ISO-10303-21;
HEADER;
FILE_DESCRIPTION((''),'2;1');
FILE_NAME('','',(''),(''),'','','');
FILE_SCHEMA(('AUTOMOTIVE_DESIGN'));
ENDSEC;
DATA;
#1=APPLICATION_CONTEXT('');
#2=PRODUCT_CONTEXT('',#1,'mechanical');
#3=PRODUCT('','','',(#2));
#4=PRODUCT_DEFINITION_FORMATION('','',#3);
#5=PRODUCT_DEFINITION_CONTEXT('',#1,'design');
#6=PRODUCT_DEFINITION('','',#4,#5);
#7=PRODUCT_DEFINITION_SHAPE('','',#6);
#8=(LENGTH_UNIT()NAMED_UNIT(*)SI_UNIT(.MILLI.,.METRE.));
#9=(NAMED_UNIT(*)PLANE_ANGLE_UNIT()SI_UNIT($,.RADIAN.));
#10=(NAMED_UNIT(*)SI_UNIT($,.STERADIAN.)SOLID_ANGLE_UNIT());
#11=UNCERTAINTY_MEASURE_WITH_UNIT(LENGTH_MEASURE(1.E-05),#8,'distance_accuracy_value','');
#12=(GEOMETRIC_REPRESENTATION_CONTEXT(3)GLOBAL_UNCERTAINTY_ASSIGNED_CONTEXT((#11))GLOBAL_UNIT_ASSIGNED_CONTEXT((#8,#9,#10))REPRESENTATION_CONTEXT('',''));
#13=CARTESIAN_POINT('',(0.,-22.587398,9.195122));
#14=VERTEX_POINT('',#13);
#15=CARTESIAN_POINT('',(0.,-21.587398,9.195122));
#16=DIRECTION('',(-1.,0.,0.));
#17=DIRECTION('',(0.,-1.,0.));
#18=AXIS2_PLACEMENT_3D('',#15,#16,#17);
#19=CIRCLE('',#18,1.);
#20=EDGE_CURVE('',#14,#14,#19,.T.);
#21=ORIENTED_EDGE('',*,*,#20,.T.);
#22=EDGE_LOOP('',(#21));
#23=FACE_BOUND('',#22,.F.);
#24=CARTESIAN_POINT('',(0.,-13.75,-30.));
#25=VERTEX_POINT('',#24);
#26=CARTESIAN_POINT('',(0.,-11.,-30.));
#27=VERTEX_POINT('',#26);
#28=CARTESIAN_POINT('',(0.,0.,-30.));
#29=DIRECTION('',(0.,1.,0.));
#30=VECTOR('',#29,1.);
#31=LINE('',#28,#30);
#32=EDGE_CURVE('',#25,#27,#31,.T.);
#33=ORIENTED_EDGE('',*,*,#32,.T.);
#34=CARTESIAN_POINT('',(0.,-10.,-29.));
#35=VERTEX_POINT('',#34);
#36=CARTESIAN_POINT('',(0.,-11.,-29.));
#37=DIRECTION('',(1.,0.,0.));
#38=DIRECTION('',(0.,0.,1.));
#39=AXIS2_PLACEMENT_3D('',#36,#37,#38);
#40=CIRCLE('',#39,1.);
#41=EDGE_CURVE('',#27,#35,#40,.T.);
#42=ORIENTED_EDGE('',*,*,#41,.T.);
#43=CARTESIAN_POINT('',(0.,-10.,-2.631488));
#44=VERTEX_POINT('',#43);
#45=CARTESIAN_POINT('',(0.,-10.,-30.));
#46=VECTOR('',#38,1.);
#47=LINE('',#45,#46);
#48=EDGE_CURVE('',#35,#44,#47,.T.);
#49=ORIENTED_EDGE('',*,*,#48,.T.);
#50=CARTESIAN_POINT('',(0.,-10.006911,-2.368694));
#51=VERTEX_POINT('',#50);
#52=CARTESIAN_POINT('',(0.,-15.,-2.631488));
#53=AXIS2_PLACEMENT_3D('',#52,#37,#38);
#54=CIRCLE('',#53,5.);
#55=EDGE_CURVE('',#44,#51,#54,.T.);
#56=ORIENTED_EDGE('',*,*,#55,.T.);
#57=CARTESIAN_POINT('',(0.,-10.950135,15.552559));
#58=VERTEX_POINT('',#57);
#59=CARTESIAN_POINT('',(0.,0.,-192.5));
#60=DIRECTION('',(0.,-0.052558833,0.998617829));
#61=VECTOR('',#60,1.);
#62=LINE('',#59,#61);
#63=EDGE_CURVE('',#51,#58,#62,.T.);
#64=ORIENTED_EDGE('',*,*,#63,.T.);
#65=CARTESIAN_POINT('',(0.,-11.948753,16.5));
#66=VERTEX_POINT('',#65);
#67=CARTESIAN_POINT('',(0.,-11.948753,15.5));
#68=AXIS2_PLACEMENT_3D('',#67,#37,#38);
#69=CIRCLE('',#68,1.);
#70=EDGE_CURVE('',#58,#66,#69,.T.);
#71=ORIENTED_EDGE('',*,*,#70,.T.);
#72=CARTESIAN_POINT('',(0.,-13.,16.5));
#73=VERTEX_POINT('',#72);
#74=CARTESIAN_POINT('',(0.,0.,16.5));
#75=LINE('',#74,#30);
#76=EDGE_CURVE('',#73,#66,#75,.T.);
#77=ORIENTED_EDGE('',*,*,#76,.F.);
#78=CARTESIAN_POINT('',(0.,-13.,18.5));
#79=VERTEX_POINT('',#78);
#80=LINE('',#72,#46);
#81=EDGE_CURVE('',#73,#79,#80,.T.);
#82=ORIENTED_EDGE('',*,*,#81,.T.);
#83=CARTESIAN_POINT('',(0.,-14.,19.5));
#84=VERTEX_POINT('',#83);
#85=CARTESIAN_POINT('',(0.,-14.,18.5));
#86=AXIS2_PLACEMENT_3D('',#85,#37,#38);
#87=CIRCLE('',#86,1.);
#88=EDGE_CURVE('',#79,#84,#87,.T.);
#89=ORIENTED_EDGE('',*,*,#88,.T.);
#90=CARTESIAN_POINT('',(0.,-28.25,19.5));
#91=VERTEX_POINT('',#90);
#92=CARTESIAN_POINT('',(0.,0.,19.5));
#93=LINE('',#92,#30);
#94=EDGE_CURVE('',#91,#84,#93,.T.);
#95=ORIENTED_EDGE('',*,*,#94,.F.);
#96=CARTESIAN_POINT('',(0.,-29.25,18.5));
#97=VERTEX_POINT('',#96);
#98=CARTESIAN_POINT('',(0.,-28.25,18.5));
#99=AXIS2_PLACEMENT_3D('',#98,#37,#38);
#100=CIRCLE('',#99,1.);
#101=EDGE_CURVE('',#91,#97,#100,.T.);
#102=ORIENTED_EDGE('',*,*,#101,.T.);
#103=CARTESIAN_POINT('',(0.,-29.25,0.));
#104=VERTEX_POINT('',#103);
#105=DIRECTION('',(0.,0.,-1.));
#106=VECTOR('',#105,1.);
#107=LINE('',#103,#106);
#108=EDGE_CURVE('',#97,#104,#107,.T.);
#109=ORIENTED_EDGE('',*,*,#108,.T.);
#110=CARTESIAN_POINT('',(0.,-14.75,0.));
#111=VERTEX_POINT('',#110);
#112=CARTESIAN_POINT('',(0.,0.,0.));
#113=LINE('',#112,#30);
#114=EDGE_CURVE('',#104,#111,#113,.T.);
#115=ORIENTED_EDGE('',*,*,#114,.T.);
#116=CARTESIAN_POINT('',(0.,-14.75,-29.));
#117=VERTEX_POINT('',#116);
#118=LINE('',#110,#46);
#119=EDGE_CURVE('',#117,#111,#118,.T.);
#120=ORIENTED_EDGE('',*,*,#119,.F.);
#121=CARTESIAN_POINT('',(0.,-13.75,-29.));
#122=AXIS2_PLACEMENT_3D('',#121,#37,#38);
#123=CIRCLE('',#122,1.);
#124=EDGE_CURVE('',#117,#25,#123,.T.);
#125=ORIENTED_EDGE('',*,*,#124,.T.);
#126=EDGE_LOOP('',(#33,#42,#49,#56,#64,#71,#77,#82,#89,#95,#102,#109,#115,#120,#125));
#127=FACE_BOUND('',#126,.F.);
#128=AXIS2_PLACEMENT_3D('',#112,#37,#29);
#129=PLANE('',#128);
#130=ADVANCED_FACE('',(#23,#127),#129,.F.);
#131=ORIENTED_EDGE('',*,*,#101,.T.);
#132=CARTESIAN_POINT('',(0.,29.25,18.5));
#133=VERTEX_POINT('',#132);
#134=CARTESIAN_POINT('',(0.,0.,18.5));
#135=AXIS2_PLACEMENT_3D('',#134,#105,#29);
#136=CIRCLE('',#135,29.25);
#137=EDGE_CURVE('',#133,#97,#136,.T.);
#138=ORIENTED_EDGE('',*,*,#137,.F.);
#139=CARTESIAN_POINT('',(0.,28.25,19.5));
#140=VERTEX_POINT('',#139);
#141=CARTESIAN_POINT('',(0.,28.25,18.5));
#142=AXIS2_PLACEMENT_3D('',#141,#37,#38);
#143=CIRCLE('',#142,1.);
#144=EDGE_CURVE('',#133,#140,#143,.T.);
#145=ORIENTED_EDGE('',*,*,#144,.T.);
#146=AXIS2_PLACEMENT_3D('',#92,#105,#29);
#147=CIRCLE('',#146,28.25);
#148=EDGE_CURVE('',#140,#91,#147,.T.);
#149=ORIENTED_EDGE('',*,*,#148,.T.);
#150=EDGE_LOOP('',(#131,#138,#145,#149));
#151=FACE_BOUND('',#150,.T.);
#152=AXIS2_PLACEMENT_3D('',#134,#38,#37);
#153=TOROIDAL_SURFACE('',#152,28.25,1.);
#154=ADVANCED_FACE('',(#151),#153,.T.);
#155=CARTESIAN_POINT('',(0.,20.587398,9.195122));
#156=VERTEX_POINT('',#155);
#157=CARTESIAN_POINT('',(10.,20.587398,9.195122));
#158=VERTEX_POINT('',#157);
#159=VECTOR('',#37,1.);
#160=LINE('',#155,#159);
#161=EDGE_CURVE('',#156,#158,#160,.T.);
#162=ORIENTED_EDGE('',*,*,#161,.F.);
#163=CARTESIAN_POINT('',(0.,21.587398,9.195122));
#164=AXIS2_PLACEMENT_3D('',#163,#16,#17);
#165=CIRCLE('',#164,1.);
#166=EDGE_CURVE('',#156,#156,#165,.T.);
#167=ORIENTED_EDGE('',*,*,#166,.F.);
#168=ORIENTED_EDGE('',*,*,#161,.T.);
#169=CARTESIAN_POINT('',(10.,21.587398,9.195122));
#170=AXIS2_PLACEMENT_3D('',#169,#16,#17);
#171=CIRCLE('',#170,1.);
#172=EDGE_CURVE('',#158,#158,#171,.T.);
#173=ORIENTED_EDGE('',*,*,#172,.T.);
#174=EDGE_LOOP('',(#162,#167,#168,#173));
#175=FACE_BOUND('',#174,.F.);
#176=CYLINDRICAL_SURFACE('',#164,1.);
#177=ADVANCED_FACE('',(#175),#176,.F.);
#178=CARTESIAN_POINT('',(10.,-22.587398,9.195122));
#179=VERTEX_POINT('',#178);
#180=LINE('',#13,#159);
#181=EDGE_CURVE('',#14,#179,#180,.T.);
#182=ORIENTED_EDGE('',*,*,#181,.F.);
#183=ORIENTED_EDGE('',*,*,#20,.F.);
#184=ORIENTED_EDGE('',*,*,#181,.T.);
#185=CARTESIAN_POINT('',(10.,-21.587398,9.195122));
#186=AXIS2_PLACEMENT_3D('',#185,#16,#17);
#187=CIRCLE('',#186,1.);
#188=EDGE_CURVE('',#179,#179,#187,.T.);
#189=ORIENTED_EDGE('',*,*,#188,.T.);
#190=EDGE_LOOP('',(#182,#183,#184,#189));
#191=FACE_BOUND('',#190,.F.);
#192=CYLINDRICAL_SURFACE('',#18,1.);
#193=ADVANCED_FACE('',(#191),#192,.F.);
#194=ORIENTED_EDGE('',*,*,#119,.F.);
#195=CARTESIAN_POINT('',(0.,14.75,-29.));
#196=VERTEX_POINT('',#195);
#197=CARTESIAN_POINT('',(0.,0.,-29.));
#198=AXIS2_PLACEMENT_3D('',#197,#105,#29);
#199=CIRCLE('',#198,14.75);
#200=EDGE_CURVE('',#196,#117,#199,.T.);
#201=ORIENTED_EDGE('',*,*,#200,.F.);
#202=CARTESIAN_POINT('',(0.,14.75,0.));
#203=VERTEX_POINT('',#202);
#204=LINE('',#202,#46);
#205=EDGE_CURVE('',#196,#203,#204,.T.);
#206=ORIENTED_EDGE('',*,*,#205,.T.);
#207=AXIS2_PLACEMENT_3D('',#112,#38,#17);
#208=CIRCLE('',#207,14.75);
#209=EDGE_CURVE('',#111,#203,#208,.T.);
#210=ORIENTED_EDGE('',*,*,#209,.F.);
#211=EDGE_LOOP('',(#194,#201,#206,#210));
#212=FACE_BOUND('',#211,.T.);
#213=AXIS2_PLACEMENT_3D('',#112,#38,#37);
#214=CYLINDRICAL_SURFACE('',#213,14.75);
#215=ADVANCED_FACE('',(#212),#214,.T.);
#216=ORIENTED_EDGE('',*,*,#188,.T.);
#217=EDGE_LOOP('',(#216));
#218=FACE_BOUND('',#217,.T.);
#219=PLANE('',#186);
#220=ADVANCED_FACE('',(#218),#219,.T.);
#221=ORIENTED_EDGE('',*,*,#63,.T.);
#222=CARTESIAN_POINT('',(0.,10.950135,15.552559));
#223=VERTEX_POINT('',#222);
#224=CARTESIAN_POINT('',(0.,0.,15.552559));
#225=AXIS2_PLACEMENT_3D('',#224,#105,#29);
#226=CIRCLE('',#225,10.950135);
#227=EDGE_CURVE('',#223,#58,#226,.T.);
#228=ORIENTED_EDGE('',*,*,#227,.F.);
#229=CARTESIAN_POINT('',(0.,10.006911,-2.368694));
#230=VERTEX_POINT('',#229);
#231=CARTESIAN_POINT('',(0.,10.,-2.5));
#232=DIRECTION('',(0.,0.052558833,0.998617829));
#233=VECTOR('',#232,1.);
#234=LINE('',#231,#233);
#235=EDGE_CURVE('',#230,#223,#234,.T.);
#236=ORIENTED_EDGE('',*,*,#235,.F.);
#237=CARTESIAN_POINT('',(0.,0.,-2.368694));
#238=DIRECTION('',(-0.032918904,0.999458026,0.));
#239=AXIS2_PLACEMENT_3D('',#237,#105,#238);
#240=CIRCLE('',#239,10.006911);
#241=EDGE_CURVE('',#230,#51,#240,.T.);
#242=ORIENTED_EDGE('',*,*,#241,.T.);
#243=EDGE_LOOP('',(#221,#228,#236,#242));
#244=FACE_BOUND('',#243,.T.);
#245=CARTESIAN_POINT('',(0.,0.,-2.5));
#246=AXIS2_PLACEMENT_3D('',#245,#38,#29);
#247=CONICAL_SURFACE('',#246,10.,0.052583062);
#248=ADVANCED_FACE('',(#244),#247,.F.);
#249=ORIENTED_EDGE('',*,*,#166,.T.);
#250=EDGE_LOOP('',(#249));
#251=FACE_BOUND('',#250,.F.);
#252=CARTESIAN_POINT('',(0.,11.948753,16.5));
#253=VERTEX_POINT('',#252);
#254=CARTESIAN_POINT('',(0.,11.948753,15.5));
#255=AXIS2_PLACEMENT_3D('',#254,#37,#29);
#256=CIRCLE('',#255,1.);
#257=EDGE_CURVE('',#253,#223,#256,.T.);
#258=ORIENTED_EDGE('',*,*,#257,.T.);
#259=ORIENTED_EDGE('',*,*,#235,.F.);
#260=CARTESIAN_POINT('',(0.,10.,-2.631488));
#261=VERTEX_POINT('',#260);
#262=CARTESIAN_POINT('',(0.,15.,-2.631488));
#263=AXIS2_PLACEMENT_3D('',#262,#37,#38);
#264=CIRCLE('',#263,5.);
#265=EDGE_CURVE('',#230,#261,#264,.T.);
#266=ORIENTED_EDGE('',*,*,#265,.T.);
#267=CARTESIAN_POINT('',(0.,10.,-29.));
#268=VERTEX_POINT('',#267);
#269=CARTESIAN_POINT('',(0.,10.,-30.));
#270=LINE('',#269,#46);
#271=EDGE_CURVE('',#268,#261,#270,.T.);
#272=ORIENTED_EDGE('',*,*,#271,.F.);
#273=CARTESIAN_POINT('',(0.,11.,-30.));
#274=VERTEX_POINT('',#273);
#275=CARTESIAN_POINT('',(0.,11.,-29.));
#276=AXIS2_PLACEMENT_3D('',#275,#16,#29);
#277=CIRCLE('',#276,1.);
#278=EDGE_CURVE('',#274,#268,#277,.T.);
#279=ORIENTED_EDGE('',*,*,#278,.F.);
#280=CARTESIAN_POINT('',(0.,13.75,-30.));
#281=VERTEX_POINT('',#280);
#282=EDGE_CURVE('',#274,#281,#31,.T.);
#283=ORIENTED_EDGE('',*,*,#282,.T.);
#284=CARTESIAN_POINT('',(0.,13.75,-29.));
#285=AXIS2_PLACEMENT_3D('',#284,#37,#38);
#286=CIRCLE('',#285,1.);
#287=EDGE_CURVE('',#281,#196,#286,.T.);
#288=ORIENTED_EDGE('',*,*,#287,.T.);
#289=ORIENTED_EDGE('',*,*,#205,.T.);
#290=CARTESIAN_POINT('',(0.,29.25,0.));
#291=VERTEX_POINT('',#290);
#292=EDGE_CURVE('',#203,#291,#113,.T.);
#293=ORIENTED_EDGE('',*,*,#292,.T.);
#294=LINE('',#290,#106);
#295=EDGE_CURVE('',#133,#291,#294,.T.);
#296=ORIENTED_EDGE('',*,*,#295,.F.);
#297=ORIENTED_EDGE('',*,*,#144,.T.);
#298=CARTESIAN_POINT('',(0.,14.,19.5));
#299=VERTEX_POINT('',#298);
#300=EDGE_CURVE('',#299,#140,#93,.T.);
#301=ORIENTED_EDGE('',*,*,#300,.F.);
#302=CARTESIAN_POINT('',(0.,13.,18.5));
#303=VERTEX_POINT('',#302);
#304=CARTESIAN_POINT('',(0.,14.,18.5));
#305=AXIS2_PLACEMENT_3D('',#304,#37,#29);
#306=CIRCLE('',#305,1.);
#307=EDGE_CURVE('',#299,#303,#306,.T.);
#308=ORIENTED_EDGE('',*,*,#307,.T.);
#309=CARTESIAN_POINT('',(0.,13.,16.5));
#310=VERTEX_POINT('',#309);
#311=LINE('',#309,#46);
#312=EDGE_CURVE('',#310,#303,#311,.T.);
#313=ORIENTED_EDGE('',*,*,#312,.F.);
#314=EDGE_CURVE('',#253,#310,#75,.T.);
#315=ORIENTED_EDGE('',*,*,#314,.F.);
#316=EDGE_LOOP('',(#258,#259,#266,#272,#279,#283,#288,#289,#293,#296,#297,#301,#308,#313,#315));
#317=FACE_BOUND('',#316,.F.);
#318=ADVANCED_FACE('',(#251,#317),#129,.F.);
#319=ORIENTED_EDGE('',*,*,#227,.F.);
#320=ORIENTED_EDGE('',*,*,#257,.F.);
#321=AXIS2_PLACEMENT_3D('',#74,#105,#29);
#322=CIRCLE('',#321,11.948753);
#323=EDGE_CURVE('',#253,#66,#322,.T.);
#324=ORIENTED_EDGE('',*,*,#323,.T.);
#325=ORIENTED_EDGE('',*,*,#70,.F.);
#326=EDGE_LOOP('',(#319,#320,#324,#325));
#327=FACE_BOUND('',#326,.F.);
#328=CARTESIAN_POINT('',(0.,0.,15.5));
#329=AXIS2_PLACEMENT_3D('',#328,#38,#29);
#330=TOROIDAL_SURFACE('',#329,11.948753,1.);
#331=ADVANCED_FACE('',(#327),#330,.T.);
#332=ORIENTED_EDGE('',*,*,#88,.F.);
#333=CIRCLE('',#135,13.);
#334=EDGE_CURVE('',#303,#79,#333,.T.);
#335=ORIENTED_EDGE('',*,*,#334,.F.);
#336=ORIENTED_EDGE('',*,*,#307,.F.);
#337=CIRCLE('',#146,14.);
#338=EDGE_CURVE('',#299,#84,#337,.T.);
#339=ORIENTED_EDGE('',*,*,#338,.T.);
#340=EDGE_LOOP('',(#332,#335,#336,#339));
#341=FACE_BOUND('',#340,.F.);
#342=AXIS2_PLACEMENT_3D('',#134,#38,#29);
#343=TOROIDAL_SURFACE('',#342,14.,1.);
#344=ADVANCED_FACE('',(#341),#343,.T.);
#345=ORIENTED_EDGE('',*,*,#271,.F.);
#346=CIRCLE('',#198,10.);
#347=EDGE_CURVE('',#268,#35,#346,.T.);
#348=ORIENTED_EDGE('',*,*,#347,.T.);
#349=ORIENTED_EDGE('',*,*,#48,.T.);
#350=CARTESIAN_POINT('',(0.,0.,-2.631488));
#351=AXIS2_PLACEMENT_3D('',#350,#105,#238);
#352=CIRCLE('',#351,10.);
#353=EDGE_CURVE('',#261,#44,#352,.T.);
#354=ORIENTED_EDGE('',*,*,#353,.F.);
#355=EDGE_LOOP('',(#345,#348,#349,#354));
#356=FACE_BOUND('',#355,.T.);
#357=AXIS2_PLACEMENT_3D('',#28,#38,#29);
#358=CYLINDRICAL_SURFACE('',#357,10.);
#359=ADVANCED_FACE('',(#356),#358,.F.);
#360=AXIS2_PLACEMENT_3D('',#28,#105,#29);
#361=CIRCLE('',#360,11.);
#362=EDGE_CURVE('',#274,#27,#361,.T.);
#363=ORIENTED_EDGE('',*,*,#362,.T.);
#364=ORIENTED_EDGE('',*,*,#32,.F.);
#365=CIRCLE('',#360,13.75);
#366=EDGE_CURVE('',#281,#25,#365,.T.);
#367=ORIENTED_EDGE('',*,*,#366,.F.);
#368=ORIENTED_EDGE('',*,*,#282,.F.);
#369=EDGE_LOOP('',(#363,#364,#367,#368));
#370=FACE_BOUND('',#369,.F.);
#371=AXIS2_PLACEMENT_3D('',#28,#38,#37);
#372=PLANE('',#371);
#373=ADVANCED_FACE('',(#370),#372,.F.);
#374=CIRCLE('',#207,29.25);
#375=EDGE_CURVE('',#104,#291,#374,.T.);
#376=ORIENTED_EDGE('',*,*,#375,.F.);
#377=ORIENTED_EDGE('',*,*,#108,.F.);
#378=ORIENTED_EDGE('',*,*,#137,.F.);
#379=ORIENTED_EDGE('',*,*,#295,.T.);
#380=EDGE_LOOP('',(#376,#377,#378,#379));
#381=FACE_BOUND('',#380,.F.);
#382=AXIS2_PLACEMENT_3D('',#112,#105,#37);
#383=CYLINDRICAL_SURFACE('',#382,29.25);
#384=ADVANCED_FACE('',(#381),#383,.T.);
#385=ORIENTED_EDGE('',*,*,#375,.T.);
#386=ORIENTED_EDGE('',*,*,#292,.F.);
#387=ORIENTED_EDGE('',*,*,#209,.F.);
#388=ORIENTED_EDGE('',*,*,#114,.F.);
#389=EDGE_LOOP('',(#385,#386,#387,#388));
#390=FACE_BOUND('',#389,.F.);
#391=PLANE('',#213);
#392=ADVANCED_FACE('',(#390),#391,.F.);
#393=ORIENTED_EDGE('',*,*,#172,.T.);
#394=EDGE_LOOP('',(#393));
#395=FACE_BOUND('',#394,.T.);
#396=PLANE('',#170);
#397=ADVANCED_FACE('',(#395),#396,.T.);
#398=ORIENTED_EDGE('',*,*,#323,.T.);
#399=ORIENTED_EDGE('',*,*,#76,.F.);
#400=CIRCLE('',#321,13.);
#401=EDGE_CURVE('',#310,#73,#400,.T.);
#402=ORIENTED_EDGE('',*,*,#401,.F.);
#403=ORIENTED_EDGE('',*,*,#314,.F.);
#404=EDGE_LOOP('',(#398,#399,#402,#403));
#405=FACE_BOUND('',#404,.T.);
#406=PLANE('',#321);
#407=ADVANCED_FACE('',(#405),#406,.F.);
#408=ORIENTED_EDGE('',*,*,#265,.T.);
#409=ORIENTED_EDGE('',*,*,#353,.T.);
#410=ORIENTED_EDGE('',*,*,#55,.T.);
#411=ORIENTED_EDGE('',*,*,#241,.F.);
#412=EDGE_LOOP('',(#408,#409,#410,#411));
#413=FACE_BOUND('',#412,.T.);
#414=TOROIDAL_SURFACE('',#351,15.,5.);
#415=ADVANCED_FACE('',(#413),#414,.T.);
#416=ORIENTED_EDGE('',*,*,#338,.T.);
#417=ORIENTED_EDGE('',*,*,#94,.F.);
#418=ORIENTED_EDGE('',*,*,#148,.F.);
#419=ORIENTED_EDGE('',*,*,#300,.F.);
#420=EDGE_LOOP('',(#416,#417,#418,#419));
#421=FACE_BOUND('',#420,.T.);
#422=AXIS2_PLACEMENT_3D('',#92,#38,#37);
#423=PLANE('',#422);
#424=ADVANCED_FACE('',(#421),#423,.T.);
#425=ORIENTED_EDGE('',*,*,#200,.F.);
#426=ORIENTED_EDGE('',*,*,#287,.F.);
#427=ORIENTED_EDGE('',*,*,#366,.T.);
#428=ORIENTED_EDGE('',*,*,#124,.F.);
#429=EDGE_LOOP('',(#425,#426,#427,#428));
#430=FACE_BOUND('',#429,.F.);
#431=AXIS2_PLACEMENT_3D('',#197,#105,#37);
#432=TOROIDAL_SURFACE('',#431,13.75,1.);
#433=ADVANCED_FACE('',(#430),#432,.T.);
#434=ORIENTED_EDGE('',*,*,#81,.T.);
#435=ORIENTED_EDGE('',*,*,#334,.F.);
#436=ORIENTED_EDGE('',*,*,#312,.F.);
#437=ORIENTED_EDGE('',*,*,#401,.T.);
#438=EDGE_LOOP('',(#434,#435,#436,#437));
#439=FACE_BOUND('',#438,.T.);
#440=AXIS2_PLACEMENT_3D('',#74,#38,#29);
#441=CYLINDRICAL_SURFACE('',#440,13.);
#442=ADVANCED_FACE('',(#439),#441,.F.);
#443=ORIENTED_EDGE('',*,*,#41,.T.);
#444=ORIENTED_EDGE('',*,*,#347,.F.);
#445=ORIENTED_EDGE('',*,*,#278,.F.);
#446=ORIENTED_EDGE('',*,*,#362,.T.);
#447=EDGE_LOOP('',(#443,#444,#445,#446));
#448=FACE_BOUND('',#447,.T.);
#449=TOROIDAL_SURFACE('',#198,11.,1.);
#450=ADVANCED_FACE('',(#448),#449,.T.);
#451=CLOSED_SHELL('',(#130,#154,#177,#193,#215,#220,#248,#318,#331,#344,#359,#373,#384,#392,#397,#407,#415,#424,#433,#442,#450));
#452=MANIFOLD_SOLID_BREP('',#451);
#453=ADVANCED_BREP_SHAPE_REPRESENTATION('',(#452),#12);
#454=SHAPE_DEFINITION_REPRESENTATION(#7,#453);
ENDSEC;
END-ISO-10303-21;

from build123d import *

# Parameters (mm, degrees)
F0_R         = 14.75
F1_DEPTH     = 30
F2_R         = 29.25
F3_DEPTH     = 19.5
F6_R         = 1
F8_W         = 73.76781106
F8_H         = 74.6486261487
F9_DEPTH     = 29.2510001
F10_T2_ANGLE = 183.7729101698
F11_R        = 1
F12_DEPTH    = 10


# Not quite as in the source:
# - a fillet or chamfer that OpenCascade refuses, or shapes differently, is made with other operations: its cross-section is extruded or revolved along the edge and cut away or added


with BuildPart() as f1:
    # F0 (on Top) → F1 (new body)
    with BuildSketch(Plane.XY):
        Circle(F0_R)
    extrude(amount=-F1_DEPTH)

    # F2 (on face) → F3 (join)
    with BuildSketch(Plane.XY):
        Circle(F2_R)
    extrude(amount=F3_DEPTH)

    # F4 (on Right) → F5 (revolve, cut)
    with BuildSketch(Plane.YZ):
        Polygon((13, 16.5), (13, 19.5), (0, 19.5), (0, -30), (10, -30), (10, -2.5), (11, 16.5), align=None)
    revolve(axis=Axis((0, 0, 5.2055120468), (0, 0, -1)), mode=Mode.SUBTRACT)

    # F6
    f6_edges = [f1.edges().sort_by_distance(p)[0] for p in [
        (-29.25, 0, 19.5),
        (0, -11, 16.5),
        (0, -13, 19.5),
        (0, -10, -30),
        (-14.75, 0, -30),
    ]]
    fillet(f6_edges, radius=F6_R)

    # F8 (on offset) → F9 (cut, through all)
    with BuildSketch(Plane.YZ):
        Rectangle(F8_W, F8_H)
    extrude(amount=-F9_DEPTH, mode=Mode.SUBTRACT)

    # F10: fillet of radius 5 on 1 edges, made by hand

    # F10_s1 → F10_t2 (revolve, cut)
    with BuildSketch(Plane(origin=(0, 0, 0), x_dir=(0, 0, 1), z_dir=(-0.999458026, -0.0329189041, 0))):
        with BuildLine():
            ThreePointArc((-2.6314879522, 10), (-2.5000454426, 10.0017280119), (-2.3686937866, 10.0069108533))
            Line((-2.3686937866, 10.0069108533), (-2.5, 10))
            Line((-2.5, 10), (-2.6314879522, 10))
        make_face()
    revolve(axis=Axis((0, 0, -2.5), (0, 0, -1)), revolution_arc=F10_T2_ANGLE, mode=Mode.SUBTRACT)

    # F11 (on face) → F12 (cut)
    with BuildSketch(Plane(origin=(0, 0, 0), x_dir=(0, -1, 0), z_dir=(-1, 0, 0))):
        with Locations((-21.587398374, 9.1951219512)):
            Circle(F11_R)
        with Locations((21.587398374, 9.1951219512)):
            Circle(F11_R)
    extrude(amount=-F12_DEPTH, mode=Mode.SUBTRACT)


solid = f1.part
